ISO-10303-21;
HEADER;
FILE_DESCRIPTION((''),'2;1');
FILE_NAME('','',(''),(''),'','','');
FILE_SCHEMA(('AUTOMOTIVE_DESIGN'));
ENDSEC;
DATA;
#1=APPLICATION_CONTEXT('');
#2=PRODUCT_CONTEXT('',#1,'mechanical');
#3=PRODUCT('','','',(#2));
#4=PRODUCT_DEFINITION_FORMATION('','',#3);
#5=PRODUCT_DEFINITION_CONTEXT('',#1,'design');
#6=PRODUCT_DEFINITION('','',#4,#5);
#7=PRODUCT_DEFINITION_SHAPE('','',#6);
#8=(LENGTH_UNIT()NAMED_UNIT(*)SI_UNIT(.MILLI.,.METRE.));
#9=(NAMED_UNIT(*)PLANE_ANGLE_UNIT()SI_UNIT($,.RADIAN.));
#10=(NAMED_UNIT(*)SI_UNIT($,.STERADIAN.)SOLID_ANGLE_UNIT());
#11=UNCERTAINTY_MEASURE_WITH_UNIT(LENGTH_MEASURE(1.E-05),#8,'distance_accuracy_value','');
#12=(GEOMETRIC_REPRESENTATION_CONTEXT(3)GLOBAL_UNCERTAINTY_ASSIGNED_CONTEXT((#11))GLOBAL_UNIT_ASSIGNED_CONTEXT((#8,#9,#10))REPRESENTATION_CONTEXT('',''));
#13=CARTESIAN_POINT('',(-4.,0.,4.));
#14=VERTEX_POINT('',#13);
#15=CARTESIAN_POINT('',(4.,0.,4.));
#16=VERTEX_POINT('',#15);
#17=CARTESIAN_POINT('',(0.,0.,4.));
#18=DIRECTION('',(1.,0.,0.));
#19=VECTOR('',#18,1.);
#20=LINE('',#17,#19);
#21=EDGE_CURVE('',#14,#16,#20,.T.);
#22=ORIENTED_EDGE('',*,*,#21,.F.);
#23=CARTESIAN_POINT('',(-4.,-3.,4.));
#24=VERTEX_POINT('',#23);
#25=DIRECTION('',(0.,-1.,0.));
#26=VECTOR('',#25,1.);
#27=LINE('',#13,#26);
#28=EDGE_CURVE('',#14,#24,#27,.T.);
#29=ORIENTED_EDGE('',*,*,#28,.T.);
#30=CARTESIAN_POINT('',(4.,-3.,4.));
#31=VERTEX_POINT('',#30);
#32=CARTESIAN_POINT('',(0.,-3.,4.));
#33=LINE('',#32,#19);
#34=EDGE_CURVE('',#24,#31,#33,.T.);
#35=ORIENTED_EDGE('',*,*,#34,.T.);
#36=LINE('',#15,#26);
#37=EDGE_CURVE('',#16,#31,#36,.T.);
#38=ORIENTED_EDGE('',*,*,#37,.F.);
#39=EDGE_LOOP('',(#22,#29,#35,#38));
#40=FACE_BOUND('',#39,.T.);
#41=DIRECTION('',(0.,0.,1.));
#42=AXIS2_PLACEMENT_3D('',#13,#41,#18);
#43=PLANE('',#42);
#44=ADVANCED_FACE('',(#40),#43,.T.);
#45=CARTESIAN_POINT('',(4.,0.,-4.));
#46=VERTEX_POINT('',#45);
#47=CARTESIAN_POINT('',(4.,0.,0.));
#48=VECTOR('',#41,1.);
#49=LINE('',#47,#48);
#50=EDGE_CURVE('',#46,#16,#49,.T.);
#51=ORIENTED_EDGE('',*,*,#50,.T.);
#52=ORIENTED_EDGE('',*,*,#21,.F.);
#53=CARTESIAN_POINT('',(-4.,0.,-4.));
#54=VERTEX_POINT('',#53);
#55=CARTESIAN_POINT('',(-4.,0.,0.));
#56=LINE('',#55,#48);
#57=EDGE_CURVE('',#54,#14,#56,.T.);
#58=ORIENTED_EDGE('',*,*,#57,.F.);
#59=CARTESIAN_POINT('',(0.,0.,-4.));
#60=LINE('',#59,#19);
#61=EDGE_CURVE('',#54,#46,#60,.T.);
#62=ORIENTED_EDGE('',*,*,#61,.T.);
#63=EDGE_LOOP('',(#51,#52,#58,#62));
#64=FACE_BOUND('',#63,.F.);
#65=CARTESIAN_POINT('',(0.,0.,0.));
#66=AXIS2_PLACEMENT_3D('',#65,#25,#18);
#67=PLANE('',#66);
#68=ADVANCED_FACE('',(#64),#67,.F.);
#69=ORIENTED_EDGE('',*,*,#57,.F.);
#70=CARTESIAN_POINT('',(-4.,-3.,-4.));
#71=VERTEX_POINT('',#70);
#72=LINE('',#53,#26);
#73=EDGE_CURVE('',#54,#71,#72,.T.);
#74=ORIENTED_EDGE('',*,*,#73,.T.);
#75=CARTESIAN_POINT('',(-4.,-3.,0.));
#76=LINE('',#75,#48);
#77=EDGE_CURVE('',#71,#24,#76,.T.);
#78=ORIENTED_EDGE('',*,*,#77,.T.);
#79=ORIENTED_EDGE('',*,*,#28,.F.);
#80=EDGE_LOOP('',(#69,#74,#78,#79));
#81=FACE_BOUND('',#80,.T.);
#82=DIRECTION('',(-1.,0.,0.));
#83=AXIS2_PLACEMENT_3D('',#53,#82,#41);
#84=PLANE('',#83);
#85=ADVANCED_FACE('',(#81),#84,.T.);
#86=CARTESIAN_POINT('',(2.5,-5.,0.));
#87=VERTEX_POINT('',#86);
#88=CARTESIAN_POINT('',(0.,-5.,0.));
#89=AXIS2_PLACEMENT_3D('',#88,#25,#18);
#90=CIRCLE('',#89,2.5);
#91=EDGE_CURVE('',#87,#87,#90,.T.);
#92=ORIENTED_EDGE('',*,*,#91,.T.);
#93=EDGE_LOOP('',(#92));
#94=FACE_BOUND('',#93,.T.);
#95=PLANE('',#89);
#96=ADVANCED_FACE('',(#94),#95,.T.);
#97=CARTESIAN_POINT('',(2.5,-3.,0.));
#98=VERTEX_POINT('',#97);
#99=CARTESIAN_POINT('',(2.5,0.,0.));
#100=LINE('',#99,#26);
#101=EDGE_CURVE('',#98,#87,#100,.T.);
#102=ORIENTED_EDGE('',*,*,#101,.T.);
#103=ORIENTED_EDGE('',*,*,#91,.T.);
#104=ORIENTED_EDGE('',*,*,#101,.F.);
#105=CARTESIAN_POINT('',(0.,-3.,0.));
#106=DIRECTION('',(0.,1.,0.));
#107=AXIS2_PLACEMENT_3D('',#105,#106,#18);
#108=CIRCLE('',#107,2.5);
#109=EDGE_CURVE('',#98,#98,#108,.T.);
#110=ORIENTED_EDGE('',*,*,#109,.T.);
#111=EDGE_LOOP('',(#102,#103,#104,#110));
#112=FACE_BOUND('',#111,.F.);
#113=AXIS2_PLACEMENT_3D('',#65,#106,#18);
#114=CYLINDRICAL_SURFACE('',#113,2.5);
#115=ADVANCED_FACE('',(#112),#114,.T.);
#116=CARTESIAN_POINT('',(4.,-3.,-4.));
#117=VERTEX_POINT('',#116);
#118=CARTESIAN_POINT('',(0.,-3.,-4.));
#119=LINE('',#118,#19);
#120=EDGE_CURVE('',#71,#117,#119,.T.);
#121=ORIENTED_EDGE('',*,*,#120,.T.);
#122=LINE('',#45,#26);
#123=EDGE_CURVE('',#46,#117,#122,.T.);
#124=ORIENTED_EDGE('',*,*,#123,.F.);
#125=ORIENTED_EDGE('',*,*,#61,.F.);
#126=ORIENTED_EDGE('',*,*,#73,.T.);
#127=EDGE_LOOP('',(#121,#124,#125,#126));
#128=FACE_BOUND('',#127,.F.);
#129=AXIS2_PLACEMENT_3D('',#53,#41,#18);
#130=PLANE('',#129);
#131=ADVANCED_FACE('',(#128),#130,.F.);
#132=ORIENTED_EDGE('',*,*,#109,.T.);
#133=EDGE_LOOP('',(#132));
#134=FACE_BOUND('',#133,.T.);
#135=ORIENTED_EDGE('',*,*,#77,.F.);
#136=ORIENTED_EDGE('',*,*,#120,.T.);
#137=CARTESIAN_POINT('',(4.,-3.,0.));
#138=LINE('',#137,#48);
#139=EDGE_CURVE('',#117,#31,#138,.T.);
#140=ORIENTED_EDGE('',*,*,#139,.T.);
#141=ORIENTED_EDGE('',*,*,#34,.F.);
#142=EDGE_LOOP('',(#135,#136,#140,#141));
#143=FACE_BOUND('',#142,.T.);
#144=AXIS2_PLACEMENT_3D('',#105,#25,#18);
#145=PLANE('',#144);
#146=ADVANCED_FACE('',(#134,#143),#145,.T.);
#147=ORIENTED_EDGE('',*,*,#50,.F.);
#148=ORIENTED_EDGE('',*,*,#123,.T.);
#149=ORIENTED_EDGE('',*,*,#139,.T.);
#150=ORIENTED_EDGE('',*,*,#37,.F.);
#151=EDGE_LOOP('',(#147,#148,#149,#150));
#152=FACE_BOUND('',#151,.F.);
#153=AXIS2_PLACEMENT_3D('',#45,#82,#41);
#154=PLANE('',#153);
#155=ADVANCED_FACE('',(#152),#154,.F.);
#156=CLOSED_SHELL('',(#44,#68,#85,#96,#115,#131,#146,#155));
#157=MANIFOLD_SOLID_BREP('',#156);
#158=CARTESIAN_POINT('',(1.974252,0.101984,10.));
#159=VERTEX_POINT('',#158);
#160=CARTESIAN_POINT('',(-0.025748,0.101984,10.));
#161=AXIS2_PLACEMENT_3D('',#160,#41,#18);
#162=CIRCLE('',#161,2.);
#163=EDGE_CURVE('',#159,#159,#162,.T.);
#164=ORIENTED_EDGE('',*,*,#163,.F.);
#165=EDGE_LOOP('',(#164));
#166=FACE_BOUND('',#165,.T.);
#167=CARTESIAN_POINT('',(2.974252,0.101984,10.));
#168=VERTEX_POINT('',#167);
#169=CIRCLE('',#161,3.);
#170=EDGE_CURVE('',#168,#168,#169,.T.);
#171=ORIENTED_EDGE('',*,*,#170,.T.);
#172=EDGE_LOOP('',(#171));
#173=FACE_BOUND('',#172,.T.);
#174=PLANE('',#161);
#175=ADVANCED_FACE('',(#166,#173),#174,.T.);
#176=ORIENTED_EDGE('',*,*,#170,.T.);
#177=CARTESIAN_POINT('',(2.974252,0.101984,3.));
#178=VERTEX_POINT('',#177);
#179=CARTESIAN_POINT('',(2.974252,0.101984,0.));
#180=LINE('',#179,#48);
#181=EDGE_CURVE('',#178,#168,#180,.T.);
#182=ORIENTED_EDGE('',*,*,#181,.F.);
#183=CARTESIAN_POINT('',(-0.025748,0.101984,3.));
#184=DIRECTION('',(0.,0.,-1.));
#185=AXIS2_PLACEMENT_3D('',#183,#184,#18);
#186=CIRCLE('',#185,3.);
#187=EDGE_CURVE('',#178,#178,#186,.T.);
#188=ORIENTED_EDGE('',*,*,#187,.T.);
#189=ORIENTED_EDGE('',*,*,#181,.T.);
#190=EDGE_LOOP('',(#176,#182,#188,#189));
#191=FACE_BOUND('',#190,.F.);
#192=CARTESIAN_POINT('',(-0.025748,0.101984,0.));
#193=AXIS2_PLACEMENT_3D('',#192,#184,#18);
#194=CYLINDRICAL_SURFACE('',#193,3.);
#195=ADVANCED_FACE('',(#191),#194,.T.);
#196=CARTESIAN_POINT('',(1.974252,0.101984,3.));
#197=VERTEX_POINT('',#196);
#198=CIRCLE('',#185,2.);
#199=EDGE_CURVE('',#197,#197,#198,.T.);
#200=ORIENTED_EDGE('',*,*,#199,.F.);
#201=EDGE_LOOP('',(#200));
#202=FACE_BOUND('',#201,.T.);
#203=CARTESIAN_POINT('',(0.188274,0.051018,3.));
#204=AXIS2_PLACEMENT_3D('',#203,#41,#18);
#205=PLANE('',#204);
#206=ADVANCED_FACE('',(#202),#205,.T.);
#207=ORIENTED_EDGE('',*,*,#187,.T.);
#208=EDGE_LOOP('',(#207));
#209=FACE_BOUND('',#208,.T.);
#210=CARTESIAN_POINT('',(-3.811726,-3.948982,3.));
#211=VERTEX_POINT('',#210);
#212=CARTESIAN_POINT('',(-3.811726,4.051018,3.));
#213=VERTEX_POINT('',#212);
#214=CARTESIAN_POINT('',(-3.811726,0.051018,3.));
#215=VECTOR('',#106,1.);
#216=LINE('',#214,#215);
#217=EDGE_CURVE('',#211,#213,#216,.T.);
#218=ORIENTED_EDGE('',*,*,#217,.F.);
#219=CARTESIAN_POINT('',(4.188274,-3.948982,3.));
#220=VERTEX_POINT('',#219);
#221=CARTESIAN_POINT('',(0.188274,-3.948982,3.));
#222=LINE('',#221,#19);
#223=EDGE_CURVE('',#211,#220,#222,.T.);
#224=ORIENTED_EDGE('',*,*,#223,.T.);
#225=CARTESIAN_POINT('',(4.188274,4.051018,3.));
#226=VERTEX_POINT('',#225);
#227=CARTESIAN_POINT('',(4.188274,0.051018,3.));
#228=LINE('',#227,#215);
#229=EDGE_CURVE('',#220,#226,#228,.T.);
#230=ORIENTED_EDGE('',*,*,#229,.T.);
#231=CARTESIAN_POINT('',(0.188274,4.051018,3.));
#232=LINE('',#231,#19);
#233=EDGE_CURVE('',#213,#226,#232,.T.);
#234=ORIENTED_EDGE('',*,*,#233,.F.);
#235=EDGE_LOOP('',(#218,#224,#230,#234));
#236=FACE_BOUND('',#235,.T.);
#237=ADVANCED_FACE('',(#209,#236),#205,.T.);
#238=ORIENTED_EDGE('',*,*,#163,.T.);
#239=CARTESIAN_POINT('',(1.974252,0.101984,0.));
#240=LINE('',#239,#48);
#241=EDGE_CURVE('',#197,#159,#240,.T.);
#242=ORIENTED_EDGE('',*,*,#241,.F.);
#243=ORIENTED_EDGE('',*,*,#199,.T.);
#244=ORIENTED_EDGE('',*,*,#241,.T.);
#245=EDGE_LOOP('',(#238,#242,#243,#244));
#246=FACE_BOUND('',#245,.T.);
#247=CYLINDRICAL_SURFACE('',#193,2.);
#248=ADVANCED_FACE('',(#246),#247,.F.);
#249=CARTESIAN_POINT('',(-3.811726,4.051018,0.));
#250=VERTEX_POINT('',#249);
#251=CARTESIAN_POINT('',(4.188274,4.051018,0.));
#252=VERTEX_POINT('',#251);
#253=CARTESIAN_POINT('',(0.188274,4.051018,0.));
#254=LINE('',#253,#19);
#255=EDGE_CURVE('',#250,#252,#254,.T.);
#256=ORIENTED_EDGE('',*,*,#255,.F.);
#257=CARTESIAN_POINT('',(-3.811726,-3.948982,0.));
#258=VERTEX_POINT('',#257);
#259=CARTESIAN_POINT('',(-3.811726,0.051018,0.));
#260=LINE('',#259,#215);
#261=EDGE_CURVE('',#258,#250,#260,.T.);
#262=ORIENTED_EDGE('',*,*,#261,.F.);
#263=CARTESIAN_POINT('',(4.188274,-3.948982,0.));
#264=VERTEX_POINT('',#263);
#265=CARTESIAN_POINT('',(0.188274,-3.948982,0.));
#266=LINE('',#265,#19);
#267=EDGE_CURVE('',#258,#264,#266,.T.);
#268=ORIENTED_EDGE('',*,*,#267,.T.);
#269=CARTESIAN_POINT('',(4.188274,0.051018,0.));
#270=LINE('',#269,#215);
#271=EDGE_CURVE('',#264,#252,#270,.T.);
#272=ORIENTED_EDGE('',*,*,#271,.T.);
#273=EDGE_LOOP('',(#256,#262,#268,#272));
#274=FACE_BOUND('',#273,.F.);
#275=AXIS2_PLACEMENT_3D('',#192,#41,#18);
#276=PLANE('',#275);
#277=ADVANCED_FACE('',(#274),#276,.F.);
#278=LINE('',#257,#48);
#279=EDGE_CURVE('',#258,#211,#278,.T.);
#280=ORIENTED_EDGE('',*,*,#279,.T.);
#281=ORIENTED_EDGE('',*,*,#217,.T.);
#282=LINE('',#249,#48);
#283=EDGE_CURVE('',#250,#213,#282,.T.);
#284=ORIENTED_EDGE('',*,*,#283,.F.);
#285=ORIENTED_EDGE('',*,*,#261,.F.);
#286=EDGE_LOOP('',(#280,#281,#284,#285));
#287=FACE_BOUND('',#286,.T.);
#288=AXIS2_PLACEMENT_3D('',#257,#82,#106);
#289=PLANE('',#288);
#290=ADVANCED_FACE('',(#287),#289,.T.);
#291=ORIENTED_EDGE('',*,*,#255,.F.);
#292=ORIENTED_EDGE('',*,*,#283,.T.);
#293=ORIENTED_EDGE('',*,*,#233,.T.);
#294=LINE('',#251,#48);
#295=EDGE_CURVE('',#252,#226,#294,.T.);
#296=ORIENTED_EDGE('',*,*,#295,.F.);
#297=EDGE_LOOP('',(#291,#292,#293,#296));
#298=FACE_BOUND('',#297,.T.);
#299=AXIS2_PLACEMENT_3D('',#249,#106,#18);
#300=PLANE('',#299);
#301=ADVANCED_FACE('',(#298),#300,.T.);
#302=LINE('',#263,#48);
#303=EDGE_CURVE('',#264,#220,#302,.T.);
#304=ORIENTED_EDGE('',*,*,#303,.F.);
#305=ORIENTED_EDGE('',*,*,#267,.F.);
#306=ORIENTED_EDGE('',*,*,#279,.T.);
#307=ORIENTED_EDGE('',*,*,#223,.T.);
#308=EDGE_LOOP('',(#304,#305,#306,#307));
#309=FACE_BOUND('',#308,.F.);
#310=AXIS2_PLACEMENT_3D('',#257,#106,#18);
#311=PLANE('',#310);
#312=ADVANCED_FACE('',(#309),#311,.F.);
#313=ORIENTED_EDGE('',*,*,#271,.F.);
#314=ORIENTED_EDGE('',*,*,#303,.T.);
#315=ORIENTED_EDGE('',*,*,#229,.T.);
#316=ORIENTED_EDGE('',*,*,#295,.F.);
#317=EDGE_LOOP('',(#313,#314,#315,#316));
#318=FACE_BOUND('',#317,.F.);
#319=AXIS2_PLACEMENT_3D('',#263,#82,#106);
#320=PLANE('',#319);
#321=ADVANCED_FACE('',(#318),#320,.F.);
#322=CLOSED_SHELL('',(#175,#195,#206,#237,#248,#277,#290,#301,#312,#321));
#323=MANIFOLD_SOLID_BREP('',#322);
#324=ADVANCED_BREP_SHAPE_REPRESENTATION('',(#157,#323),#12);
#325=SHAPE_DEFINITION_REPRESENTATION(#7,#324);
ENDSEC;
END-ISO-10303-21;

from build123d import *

# Parameters (mm, degrees)
F0_W     = 8
F0_H     = 8
F1_DEPTH = 3
F2_R     = 2.5
F3_DEPTH = 5
F4_W     = 8
F4_H     = 8
F5_DEPTH = 3
F6_R     = 3
F6_R_2   = 2
F7_DEPTH = 10


with BuildPart() as f1:
    # F0 (on Front) → F1 (new body)
    with BuildSketch(Plane.XZ):
        Rectangle(F0_W, F0_H)
    extrude(amount=F1_DEPTH)

    # F2 (on Front) → F3 (join)
    with BuildSketch(Plane.XZ):
        Circle(F2_R)
    extrude(amount=F3_DEPTH)


with BuildPart() as f5:
    # F4 (on Top) → F5 (new body)
    with BuildSketch(Plane.XY):
        with Locations((0.1882740475, 0.0510183199)):
            Rectangle(F4_W, F4_H)
    extrude(amount=F5_DEPTH)

    # F6 (on Top) → F7 (join)
    with BuildSketch(Plane.XY):
        with Locations((-0.0257475294, 0.1019836782)):
            Circle(F6_R)
        with Locations((-0.0257475294, 0.1019836782)):
            Circle(F6_R_2, mode=Mode.SUBTRACT)
    extrude(amount=F7_DEPTH)


solid = Compound([f1.part, f5.part])
